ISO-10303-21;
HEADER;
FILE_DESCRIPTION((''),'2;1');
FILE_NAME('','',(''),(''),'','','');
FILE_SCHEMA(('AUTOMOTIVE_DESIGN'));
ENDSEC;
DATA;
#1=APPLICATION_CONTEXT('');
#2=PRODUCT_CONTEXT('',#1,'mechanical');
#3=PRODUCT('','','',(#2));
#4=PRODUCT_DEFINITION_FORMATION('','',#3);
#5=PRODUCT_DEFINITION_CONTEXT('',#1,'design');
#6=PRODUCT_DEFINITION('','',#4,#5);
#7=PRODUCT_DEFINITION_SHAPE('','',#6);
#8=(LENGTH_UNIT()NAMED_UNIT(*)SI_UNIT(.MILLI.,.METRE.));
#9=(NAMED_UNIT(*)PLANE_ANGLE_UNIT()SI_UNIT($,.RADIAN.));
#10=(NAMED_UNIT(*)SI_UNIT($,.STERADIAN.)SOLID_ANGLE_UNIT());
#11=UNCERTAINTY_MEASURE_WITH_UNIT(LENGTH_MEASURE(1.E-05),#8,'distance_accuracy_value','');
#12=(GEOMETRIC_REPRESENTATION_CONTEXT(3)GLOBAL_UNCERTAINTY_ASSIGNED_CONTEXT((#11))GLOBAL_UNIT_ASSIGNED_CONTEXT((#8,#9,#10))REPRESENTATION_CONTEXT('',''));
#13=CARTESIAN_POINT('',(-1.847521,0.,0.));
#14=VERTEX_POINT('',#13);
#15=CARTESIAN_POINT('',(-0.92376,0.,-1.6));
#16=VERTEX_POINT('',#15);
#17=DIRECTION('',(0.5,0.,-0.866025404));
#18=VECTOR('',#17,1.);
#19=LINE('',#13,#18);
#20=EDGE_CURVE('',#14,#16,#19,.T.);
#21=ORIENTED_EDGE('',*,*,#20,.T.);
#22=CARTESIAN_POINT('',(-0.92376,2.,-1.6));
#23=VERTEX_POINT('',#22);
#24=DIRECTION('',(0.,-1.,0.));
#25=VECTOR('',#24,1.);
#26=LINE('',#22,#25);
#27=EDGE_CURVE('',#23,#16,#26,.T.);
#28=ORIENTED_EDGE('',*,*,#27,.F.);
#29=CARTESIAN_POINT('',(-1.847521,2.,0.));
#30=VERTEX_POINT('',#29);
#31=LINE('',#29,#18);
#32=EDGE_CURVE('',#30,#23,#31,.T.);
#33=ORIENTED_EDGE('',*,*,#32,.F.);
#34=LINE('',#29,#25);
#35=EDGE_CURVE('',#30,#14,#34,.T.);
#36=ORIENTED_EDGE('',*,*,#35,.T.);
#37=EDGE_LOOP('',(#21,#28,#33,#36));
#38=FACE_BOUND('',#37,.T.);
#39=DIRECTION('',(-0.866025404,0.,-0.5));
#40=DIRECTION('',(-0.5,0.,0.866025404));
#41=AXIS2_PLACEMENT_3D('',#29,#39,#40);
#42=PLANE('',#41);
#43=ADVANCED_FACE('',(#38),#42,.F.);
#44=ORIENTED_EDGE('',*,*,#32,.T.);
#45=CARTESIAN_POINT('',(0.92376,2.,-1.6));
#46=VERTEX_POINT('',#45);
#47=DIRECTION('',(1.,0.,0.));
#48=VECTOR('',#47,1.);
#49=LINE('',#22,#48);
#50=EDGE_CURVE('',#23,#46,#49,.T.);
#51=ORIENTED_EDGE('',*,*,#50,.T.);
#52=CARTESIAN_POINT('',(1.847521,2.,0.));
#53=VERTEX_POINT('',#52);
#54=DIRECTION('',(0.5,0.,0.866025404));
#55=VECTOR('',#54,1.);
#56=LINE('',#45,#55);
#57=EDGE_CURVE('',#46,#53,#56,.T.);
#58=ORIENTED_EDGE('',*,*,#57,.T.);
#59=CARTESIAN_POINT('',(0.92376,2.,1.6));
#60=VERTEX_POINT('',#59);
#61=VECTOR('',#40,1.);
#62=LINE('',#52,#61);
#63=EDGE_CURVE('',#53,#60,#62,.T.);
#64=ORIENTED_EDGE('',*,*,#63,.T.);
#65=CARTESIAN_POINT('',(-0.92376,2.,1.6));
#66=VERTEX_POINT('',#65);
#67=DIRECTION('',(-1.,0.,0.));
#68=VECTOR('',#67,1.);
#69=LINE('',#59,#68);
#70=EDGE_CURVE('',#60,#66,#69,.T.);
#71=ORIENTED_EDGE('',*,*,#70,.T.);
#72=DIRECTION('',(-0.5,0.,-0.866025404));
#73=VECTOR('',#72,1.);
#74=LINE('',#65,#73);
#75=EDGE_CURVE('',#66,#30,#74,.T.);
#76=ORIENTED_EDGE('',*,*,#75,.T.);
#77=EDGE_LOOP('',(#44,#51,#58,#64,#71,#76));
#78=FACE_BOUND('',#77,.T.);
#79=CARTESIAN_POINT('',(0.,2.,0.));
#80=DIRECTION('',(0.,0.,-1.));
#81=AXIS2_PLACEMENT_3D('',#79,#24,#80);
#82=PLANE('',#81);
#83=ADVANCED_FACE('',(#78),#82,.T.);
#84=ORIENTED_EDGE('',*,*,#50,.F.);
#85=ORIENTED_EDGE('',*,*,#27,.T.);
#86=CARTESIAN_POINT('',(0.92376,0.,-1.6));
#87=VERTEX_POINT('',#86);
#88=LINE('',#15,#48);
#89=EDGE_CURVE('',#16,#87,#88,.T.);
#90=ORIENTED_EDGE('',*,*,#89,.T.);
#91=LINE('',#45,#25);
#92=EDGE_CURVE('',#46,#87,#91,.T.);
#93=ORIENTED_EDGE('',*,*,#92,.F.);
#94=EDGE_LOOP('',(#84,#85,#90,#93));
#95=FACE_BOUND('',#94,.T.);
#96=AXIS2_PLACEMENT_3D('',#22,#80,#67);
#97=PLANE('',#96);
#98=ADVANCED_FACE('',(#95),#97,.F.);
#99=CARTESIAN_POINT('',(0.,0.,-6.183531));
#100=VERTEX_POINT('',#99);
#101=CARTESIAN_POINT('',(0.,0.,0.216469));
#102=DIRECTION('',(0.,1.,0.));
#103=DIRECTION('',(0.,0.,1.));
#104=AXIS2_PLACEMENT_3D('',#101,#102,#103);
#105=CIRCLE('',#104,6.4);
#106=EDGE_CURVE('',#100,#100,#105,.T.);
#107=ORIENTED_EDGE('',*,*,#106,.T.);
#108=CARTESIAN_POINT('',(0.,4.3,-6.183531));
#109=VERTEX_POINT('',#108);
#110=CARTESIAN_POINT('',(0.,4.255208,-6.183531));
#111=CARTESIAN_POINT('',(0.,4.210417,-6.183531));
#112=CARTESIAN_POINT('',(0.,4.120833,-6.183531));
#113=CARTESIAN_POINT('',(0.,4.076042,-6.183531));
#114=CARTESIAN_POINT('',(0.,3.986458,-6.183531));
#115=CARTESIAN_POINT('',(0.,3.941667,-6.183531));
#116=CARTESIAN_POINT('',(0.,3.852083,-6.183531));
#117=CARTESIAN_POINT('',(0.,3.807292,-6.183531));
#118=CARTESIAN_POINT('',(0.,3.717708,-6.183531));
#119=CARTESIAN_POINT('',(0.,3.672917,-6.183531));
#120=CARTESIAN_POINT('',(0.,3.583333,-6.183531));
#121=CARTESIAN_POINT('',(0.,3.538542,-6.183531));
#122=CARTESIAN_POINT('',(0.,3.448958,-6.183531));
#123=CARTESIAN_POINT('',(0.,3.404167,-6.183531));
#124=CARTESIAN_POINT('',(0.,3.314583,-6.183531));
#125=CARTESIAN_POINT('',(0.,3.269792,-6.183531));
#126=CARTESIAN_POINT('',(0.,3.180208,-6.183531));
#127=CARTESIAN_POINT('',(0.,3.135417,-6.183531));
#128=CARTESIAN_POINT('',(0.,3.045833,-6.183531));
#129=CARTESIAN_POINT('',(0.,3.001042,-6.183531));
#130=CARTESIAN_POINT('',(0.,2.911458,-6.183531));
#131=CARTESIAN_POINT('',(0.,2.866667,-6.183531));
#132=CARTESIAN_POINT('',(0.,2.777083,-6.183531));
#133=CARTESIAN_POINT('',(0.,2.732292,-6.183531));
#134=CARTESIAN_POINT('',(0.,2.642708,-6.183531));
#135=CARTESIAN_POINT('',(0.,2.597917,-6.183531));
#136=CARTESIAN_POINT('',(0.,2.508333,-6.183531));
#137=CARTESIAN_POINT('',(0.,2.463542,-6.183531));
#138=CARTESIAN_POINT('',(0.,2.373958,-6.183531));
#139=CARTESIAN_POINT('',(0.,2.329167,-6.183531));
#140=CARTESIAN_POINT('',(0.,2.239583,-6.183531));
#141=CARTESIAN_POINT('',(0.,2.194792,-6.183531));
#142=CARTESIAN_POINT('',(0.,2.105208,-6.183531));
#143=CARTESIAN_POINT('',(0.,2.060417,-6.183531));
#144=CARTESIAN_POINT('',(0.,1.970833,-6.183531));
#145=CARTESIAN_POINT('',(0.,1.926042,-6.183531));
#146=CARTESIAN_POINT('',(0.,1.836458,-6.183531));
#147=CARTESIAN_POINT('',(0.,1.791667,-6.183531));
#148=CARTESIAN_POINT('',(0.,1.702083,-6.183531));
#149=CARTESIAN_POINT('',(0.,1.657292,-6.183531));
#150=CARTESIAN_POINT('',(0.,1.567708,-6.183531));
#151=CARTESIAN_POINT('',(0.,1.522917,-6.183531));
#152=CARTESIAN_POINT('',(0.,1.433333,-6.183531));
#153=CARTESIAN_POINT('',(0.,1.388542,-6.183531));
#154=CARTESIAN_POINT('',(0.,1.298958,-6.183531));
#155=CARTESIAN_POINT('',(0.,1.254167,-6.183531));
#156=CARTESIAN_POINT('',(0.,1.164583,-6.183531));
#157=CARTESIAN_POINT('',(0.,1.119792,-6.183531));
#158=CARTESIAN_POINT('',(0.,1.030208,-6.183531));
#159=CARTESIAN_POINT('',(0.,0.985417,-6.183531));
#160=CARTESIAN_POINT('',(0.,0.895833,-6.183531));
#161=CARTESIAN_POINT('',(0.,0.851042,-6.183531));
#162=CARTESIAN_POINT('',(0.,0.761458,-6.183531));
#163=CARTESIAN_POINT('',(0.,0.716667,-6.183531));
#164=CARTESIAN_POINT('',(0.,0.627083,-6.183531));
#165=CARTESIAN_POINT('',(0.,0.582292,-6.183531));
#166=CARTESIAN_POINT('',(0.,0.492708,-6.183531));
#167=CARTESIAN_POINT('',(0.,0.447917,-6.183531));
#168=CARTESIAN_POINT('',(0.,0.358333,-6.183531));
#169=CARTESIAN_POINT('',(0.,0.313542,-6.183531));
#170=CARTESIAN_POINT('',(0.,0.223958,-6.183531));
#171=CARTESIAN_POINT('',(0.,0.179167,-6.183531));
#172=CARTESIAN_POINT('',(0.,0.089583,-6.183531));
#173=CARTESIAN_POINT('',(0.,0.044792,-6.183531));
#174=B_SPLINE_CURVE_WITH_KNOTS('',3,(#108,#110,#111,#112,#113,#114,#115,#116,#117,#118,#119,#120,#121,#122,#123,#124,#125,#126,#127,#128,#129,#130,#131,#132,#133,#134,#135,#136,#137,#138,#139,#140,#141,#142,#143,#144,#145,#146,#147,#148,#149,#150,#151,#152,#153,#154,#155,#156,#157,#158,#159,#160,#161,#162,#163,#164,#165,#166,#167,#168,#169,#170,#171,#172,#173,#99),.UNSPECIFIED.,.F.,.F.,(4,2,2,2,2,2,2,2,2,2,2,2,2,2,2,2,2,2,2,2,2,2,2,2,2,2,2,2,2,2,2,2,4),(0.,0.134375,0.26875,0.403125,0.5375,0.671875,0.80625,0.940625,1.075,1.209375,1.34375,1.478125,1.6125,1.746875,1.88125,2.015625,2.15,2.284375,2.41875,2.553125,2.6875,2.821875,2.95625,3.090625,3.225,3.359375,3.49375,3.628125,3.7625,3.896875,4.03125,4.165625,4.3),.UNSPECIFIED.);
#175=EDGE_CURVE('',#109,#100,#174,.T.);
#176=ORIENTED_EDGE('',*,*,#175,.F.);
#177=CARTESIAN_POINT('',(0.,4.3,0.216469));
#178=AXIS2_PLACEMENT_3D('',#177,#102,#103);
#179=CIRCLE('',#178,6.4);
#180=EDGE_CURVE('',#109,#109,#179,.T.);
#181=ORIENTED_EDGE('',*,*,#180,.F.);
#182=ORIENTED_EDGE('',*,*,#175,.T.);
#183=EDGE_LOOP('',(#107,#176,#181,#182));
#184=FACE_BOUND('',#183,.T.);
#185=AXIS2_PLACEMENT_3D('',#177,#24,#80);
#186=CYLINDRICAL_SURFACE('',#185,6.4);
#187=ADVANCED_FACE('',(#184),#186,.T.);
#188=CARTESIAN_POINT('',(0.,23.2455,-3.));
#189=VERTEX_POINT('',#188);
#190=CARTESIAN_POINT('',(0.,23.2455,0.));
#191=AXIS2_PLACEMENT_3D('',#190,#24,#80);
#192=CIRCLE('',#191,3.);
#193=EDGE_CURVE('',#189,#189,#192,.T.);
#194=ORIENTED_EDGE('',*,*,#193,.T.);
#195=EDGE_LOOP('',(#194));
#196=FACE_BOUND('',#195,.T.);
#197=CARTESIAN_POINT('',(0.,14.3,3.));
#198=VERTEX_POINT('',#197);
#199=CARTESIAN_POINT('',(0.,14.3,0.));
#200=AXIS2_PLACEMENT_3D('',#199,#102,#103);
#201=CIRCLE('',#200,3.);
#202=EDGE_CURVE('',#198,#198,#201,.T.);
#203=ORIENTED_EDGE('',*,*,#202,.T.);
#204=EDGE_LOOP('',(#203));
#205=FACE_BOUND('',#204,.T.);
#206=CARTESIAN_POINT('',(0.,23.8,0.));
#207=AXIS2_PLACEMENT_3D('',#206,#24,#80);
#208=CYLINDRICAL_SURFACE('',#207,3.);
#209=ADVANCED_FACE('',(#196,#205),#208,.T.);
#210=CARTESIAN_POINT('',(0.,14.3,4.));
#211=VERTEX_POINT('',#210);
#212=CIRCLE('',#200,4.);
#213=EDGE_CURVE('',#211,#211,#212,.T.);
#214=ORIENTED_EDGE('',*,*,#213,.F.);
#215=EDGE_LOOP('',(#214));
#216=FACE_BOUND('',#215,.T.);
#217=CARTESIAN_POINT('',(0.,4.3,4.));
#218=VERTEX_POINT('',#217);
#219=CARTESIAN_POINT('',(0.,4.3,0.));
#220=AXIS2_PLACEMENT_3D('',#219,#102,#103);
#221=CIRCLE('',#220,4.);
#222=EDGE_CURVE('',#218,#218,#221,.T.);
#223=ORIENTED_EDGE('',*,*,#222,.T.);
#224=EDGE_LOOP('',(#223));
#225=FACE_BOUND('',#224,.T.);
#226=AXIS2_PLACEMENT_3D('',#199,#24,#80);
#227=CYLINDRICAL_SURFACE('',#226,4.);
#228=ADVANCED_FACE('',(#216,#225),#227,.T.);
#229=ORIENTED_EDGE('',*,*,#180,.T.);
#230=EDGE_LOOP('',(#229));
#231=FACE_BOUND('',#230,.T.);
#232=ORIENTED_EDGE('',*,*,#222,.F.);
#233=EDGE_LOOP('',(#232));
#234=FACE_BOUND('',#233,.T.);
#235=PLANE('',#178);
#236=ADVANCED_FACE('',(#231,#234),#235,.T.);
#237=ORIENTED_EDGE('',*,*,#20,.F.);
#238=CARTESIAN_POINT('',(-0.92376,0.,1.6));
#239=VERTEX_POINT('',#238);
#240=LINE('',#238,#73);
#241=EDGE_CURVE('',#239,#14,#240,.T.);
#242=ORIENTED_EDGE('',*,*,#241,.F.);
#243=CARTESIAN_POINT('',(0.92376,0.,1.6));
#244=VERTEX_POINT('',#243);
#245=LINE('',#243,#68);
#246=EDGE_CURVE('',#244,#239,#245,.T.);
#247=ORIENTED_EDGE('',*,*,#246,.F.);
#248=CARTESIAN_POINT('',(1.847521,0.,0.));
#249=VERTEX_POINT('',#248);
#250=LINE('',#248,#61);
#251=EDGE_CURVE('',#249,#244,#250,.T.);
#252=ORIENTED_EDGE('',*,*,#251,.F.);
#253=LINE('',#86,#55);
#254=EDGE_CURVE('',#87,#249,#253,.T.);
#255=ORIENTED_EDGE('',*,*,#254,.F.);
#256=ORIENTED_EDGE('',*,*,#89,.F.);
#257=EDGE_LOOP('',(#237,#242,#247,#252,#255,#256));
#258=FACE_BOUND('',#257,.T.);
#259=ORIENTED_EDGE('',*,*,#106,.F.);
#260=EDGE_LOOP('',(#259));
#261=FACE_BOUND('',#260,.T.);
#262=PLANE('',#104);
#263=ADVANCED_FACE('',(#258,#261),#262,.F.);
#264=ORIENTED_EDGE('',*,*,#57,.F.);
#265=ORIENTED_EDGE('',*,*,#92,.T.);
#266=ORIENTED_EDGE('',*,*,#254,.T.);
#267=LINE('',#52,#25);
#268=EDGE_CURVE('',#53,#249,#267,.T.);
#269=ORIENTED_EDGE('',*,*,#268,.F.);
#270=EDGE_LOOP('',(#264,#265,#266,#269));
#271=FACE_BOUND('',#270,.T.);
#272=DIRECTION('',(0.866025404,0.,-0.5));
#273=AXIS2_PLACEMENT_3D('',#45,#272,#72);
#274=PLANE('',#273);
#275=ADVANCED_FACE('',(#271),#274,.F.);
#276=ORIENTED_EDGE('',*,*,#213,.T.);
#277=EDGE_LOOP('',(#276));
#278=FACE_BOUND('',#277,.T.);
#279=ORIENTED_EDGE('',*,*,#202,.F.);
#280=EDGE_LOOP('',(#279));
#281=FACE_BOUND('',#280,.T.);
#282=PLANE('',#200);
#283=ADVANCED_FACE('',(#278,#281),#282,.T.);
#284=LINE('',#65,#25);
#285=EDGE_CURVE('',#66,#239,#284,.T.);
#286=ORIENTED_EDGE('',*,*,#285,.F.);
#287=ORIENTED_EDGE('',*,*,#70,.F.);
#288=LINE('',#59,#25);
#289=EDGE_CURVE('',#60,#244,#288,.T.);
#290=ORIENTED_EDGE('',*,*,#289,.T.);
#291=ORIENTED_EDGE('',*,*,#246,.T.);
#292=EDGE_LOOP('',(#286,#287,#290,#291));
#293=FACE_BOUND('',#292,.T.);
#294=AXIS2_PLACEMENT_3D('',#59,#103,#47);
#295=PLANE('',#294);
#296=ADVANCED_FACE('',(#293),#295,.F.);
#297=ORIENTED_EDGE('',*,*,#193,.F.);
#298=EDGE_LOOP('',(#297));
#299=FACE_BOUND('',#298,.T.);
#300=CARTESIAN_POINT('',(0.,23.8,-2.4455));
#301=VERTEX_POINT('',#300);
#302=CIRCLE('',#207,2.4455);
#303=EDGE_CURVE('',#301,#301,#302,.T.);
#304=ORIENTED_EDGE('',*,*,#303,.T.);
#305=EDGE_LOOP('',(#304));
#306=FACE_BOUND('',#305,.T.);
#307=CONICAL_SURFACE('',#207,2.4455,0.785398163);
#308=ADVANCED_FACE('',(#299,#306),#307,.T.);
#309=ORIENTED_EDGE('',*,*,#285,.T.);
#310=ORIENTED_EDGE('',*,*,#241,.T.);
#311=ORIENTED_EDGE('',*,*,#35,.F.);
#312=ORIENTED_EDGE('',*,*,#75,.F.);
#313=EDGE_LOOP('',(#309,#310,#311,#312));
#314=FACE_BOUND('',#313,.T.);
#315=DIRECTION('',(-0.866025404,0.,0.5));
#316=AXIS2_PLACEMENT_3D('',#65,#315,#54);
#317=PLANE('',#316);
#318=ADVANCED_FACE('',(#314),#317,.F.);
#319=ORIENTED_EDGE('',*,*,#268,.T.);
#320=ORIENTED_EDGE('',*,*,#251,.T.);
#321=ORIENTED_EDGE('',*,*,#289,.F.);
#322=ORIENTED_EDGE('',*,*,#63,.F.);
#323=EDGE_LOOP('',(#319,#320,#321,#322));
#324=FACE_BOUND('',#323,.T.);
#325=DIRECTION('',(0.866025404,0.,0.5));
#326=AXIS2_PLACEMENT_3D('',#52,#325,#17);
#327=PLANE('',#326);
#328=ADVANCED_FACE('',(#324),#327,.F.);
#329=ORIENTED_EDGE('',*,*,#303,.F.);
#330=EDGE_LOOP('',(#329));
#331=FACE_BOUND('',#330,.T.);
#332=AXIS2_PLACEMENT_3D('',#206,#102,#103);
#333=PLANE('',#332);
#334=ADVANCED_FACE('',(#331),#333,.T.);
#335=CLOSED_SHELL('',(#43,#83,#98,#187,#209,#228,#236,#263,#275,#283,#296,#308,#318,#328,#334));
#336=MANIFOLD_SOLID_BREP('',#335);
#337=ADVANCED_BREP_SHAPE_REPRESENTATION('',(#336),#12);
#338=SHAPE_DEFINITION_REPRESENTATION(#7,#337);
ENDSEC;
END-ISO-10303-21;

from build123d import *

# Parameters (mm, degrees)
SKETCH_1_R          = 6.4
EXTRUDE_1_DEPTH     = 4.3
SKETCH_2_R          = 4
EXTRUDE_2_DEPTH     = 10
SKETCH_3_R          = 3
EXTRUDE_3_DEPTH     = 9.5
CUT_EXTRUDE_1_DEPTH = 2


# Read off the part's stored shape, not the designer's step: M6x1.0 机械螺纹 螺柱1
with BuildPart() as part:
    # 草图1 → 凸台-拉伸1 (new body)
    with BuildSketch(Plane(origin=(0, 0, 0), x_dir=(1, 0, 0), z_dir=(0, 1, 0))):
        with Locations(Location((0, -0.216468968, 0), (0, 0, 90))):
            Circle(SKETCH_1_R)
    extrude(amount=EXTRUDE_1_DEPTH)

    # 草图2 → 凸台-拉伸2 (add)
    with BuildSketch(Plane(origin=(0, 4.3, 0), x_dir=(1, 0, 0), z_dir=(0, 1, 0))):
        with Locations(Location((0, 0, 0), (0, 0, 270))):
            Circle(SKETCH_2_R)
    extrude(amount=EXTRUDE_2_DEPTH)

    # 草图3 → 凸台-拉伸3 (add)
    with BuildSketch(Plane(origin=(0, 14.3, 0), x_dir=(1, 0, 0), z_dir=(0, 1, 0))):
        with Locations(Location((0, 0, 0), (0, 0, 270))):
            Circle(SKETCH_3_R)
    extrude(amount=EXTRUDE_3_DEPTH)

    # M6x1.0 机械螺纹 螺柱1 outline → M6x1.0 机械螺纹 螺柱1 (revolve, cut)
    with BuildSketch(Plane.XY):
        Polygon((3, 23.8), (2.4455, 23.8), (3, 23.2455), align=None)
    revolve(axis=Axis((0, 0, 0), (0, 1, 0)), mode=Mode.SUBTRACT)

    # 草图5 → 切除-拉伸1 (cut)
    with BuildSketch(Plane.XZ):
        Polygon((1.847520861, 0), (0.923760431, 1.6), (-0.923760431, 1.6), (-1.847520861, 0), (-0.923760431, -1.6), (0.923760431, -1.6), align=None)
    extrude(amount=-CUT_EXTRUDE_1_DEPTH, mode=Mode.SUBTRACT)


solid = part.part
